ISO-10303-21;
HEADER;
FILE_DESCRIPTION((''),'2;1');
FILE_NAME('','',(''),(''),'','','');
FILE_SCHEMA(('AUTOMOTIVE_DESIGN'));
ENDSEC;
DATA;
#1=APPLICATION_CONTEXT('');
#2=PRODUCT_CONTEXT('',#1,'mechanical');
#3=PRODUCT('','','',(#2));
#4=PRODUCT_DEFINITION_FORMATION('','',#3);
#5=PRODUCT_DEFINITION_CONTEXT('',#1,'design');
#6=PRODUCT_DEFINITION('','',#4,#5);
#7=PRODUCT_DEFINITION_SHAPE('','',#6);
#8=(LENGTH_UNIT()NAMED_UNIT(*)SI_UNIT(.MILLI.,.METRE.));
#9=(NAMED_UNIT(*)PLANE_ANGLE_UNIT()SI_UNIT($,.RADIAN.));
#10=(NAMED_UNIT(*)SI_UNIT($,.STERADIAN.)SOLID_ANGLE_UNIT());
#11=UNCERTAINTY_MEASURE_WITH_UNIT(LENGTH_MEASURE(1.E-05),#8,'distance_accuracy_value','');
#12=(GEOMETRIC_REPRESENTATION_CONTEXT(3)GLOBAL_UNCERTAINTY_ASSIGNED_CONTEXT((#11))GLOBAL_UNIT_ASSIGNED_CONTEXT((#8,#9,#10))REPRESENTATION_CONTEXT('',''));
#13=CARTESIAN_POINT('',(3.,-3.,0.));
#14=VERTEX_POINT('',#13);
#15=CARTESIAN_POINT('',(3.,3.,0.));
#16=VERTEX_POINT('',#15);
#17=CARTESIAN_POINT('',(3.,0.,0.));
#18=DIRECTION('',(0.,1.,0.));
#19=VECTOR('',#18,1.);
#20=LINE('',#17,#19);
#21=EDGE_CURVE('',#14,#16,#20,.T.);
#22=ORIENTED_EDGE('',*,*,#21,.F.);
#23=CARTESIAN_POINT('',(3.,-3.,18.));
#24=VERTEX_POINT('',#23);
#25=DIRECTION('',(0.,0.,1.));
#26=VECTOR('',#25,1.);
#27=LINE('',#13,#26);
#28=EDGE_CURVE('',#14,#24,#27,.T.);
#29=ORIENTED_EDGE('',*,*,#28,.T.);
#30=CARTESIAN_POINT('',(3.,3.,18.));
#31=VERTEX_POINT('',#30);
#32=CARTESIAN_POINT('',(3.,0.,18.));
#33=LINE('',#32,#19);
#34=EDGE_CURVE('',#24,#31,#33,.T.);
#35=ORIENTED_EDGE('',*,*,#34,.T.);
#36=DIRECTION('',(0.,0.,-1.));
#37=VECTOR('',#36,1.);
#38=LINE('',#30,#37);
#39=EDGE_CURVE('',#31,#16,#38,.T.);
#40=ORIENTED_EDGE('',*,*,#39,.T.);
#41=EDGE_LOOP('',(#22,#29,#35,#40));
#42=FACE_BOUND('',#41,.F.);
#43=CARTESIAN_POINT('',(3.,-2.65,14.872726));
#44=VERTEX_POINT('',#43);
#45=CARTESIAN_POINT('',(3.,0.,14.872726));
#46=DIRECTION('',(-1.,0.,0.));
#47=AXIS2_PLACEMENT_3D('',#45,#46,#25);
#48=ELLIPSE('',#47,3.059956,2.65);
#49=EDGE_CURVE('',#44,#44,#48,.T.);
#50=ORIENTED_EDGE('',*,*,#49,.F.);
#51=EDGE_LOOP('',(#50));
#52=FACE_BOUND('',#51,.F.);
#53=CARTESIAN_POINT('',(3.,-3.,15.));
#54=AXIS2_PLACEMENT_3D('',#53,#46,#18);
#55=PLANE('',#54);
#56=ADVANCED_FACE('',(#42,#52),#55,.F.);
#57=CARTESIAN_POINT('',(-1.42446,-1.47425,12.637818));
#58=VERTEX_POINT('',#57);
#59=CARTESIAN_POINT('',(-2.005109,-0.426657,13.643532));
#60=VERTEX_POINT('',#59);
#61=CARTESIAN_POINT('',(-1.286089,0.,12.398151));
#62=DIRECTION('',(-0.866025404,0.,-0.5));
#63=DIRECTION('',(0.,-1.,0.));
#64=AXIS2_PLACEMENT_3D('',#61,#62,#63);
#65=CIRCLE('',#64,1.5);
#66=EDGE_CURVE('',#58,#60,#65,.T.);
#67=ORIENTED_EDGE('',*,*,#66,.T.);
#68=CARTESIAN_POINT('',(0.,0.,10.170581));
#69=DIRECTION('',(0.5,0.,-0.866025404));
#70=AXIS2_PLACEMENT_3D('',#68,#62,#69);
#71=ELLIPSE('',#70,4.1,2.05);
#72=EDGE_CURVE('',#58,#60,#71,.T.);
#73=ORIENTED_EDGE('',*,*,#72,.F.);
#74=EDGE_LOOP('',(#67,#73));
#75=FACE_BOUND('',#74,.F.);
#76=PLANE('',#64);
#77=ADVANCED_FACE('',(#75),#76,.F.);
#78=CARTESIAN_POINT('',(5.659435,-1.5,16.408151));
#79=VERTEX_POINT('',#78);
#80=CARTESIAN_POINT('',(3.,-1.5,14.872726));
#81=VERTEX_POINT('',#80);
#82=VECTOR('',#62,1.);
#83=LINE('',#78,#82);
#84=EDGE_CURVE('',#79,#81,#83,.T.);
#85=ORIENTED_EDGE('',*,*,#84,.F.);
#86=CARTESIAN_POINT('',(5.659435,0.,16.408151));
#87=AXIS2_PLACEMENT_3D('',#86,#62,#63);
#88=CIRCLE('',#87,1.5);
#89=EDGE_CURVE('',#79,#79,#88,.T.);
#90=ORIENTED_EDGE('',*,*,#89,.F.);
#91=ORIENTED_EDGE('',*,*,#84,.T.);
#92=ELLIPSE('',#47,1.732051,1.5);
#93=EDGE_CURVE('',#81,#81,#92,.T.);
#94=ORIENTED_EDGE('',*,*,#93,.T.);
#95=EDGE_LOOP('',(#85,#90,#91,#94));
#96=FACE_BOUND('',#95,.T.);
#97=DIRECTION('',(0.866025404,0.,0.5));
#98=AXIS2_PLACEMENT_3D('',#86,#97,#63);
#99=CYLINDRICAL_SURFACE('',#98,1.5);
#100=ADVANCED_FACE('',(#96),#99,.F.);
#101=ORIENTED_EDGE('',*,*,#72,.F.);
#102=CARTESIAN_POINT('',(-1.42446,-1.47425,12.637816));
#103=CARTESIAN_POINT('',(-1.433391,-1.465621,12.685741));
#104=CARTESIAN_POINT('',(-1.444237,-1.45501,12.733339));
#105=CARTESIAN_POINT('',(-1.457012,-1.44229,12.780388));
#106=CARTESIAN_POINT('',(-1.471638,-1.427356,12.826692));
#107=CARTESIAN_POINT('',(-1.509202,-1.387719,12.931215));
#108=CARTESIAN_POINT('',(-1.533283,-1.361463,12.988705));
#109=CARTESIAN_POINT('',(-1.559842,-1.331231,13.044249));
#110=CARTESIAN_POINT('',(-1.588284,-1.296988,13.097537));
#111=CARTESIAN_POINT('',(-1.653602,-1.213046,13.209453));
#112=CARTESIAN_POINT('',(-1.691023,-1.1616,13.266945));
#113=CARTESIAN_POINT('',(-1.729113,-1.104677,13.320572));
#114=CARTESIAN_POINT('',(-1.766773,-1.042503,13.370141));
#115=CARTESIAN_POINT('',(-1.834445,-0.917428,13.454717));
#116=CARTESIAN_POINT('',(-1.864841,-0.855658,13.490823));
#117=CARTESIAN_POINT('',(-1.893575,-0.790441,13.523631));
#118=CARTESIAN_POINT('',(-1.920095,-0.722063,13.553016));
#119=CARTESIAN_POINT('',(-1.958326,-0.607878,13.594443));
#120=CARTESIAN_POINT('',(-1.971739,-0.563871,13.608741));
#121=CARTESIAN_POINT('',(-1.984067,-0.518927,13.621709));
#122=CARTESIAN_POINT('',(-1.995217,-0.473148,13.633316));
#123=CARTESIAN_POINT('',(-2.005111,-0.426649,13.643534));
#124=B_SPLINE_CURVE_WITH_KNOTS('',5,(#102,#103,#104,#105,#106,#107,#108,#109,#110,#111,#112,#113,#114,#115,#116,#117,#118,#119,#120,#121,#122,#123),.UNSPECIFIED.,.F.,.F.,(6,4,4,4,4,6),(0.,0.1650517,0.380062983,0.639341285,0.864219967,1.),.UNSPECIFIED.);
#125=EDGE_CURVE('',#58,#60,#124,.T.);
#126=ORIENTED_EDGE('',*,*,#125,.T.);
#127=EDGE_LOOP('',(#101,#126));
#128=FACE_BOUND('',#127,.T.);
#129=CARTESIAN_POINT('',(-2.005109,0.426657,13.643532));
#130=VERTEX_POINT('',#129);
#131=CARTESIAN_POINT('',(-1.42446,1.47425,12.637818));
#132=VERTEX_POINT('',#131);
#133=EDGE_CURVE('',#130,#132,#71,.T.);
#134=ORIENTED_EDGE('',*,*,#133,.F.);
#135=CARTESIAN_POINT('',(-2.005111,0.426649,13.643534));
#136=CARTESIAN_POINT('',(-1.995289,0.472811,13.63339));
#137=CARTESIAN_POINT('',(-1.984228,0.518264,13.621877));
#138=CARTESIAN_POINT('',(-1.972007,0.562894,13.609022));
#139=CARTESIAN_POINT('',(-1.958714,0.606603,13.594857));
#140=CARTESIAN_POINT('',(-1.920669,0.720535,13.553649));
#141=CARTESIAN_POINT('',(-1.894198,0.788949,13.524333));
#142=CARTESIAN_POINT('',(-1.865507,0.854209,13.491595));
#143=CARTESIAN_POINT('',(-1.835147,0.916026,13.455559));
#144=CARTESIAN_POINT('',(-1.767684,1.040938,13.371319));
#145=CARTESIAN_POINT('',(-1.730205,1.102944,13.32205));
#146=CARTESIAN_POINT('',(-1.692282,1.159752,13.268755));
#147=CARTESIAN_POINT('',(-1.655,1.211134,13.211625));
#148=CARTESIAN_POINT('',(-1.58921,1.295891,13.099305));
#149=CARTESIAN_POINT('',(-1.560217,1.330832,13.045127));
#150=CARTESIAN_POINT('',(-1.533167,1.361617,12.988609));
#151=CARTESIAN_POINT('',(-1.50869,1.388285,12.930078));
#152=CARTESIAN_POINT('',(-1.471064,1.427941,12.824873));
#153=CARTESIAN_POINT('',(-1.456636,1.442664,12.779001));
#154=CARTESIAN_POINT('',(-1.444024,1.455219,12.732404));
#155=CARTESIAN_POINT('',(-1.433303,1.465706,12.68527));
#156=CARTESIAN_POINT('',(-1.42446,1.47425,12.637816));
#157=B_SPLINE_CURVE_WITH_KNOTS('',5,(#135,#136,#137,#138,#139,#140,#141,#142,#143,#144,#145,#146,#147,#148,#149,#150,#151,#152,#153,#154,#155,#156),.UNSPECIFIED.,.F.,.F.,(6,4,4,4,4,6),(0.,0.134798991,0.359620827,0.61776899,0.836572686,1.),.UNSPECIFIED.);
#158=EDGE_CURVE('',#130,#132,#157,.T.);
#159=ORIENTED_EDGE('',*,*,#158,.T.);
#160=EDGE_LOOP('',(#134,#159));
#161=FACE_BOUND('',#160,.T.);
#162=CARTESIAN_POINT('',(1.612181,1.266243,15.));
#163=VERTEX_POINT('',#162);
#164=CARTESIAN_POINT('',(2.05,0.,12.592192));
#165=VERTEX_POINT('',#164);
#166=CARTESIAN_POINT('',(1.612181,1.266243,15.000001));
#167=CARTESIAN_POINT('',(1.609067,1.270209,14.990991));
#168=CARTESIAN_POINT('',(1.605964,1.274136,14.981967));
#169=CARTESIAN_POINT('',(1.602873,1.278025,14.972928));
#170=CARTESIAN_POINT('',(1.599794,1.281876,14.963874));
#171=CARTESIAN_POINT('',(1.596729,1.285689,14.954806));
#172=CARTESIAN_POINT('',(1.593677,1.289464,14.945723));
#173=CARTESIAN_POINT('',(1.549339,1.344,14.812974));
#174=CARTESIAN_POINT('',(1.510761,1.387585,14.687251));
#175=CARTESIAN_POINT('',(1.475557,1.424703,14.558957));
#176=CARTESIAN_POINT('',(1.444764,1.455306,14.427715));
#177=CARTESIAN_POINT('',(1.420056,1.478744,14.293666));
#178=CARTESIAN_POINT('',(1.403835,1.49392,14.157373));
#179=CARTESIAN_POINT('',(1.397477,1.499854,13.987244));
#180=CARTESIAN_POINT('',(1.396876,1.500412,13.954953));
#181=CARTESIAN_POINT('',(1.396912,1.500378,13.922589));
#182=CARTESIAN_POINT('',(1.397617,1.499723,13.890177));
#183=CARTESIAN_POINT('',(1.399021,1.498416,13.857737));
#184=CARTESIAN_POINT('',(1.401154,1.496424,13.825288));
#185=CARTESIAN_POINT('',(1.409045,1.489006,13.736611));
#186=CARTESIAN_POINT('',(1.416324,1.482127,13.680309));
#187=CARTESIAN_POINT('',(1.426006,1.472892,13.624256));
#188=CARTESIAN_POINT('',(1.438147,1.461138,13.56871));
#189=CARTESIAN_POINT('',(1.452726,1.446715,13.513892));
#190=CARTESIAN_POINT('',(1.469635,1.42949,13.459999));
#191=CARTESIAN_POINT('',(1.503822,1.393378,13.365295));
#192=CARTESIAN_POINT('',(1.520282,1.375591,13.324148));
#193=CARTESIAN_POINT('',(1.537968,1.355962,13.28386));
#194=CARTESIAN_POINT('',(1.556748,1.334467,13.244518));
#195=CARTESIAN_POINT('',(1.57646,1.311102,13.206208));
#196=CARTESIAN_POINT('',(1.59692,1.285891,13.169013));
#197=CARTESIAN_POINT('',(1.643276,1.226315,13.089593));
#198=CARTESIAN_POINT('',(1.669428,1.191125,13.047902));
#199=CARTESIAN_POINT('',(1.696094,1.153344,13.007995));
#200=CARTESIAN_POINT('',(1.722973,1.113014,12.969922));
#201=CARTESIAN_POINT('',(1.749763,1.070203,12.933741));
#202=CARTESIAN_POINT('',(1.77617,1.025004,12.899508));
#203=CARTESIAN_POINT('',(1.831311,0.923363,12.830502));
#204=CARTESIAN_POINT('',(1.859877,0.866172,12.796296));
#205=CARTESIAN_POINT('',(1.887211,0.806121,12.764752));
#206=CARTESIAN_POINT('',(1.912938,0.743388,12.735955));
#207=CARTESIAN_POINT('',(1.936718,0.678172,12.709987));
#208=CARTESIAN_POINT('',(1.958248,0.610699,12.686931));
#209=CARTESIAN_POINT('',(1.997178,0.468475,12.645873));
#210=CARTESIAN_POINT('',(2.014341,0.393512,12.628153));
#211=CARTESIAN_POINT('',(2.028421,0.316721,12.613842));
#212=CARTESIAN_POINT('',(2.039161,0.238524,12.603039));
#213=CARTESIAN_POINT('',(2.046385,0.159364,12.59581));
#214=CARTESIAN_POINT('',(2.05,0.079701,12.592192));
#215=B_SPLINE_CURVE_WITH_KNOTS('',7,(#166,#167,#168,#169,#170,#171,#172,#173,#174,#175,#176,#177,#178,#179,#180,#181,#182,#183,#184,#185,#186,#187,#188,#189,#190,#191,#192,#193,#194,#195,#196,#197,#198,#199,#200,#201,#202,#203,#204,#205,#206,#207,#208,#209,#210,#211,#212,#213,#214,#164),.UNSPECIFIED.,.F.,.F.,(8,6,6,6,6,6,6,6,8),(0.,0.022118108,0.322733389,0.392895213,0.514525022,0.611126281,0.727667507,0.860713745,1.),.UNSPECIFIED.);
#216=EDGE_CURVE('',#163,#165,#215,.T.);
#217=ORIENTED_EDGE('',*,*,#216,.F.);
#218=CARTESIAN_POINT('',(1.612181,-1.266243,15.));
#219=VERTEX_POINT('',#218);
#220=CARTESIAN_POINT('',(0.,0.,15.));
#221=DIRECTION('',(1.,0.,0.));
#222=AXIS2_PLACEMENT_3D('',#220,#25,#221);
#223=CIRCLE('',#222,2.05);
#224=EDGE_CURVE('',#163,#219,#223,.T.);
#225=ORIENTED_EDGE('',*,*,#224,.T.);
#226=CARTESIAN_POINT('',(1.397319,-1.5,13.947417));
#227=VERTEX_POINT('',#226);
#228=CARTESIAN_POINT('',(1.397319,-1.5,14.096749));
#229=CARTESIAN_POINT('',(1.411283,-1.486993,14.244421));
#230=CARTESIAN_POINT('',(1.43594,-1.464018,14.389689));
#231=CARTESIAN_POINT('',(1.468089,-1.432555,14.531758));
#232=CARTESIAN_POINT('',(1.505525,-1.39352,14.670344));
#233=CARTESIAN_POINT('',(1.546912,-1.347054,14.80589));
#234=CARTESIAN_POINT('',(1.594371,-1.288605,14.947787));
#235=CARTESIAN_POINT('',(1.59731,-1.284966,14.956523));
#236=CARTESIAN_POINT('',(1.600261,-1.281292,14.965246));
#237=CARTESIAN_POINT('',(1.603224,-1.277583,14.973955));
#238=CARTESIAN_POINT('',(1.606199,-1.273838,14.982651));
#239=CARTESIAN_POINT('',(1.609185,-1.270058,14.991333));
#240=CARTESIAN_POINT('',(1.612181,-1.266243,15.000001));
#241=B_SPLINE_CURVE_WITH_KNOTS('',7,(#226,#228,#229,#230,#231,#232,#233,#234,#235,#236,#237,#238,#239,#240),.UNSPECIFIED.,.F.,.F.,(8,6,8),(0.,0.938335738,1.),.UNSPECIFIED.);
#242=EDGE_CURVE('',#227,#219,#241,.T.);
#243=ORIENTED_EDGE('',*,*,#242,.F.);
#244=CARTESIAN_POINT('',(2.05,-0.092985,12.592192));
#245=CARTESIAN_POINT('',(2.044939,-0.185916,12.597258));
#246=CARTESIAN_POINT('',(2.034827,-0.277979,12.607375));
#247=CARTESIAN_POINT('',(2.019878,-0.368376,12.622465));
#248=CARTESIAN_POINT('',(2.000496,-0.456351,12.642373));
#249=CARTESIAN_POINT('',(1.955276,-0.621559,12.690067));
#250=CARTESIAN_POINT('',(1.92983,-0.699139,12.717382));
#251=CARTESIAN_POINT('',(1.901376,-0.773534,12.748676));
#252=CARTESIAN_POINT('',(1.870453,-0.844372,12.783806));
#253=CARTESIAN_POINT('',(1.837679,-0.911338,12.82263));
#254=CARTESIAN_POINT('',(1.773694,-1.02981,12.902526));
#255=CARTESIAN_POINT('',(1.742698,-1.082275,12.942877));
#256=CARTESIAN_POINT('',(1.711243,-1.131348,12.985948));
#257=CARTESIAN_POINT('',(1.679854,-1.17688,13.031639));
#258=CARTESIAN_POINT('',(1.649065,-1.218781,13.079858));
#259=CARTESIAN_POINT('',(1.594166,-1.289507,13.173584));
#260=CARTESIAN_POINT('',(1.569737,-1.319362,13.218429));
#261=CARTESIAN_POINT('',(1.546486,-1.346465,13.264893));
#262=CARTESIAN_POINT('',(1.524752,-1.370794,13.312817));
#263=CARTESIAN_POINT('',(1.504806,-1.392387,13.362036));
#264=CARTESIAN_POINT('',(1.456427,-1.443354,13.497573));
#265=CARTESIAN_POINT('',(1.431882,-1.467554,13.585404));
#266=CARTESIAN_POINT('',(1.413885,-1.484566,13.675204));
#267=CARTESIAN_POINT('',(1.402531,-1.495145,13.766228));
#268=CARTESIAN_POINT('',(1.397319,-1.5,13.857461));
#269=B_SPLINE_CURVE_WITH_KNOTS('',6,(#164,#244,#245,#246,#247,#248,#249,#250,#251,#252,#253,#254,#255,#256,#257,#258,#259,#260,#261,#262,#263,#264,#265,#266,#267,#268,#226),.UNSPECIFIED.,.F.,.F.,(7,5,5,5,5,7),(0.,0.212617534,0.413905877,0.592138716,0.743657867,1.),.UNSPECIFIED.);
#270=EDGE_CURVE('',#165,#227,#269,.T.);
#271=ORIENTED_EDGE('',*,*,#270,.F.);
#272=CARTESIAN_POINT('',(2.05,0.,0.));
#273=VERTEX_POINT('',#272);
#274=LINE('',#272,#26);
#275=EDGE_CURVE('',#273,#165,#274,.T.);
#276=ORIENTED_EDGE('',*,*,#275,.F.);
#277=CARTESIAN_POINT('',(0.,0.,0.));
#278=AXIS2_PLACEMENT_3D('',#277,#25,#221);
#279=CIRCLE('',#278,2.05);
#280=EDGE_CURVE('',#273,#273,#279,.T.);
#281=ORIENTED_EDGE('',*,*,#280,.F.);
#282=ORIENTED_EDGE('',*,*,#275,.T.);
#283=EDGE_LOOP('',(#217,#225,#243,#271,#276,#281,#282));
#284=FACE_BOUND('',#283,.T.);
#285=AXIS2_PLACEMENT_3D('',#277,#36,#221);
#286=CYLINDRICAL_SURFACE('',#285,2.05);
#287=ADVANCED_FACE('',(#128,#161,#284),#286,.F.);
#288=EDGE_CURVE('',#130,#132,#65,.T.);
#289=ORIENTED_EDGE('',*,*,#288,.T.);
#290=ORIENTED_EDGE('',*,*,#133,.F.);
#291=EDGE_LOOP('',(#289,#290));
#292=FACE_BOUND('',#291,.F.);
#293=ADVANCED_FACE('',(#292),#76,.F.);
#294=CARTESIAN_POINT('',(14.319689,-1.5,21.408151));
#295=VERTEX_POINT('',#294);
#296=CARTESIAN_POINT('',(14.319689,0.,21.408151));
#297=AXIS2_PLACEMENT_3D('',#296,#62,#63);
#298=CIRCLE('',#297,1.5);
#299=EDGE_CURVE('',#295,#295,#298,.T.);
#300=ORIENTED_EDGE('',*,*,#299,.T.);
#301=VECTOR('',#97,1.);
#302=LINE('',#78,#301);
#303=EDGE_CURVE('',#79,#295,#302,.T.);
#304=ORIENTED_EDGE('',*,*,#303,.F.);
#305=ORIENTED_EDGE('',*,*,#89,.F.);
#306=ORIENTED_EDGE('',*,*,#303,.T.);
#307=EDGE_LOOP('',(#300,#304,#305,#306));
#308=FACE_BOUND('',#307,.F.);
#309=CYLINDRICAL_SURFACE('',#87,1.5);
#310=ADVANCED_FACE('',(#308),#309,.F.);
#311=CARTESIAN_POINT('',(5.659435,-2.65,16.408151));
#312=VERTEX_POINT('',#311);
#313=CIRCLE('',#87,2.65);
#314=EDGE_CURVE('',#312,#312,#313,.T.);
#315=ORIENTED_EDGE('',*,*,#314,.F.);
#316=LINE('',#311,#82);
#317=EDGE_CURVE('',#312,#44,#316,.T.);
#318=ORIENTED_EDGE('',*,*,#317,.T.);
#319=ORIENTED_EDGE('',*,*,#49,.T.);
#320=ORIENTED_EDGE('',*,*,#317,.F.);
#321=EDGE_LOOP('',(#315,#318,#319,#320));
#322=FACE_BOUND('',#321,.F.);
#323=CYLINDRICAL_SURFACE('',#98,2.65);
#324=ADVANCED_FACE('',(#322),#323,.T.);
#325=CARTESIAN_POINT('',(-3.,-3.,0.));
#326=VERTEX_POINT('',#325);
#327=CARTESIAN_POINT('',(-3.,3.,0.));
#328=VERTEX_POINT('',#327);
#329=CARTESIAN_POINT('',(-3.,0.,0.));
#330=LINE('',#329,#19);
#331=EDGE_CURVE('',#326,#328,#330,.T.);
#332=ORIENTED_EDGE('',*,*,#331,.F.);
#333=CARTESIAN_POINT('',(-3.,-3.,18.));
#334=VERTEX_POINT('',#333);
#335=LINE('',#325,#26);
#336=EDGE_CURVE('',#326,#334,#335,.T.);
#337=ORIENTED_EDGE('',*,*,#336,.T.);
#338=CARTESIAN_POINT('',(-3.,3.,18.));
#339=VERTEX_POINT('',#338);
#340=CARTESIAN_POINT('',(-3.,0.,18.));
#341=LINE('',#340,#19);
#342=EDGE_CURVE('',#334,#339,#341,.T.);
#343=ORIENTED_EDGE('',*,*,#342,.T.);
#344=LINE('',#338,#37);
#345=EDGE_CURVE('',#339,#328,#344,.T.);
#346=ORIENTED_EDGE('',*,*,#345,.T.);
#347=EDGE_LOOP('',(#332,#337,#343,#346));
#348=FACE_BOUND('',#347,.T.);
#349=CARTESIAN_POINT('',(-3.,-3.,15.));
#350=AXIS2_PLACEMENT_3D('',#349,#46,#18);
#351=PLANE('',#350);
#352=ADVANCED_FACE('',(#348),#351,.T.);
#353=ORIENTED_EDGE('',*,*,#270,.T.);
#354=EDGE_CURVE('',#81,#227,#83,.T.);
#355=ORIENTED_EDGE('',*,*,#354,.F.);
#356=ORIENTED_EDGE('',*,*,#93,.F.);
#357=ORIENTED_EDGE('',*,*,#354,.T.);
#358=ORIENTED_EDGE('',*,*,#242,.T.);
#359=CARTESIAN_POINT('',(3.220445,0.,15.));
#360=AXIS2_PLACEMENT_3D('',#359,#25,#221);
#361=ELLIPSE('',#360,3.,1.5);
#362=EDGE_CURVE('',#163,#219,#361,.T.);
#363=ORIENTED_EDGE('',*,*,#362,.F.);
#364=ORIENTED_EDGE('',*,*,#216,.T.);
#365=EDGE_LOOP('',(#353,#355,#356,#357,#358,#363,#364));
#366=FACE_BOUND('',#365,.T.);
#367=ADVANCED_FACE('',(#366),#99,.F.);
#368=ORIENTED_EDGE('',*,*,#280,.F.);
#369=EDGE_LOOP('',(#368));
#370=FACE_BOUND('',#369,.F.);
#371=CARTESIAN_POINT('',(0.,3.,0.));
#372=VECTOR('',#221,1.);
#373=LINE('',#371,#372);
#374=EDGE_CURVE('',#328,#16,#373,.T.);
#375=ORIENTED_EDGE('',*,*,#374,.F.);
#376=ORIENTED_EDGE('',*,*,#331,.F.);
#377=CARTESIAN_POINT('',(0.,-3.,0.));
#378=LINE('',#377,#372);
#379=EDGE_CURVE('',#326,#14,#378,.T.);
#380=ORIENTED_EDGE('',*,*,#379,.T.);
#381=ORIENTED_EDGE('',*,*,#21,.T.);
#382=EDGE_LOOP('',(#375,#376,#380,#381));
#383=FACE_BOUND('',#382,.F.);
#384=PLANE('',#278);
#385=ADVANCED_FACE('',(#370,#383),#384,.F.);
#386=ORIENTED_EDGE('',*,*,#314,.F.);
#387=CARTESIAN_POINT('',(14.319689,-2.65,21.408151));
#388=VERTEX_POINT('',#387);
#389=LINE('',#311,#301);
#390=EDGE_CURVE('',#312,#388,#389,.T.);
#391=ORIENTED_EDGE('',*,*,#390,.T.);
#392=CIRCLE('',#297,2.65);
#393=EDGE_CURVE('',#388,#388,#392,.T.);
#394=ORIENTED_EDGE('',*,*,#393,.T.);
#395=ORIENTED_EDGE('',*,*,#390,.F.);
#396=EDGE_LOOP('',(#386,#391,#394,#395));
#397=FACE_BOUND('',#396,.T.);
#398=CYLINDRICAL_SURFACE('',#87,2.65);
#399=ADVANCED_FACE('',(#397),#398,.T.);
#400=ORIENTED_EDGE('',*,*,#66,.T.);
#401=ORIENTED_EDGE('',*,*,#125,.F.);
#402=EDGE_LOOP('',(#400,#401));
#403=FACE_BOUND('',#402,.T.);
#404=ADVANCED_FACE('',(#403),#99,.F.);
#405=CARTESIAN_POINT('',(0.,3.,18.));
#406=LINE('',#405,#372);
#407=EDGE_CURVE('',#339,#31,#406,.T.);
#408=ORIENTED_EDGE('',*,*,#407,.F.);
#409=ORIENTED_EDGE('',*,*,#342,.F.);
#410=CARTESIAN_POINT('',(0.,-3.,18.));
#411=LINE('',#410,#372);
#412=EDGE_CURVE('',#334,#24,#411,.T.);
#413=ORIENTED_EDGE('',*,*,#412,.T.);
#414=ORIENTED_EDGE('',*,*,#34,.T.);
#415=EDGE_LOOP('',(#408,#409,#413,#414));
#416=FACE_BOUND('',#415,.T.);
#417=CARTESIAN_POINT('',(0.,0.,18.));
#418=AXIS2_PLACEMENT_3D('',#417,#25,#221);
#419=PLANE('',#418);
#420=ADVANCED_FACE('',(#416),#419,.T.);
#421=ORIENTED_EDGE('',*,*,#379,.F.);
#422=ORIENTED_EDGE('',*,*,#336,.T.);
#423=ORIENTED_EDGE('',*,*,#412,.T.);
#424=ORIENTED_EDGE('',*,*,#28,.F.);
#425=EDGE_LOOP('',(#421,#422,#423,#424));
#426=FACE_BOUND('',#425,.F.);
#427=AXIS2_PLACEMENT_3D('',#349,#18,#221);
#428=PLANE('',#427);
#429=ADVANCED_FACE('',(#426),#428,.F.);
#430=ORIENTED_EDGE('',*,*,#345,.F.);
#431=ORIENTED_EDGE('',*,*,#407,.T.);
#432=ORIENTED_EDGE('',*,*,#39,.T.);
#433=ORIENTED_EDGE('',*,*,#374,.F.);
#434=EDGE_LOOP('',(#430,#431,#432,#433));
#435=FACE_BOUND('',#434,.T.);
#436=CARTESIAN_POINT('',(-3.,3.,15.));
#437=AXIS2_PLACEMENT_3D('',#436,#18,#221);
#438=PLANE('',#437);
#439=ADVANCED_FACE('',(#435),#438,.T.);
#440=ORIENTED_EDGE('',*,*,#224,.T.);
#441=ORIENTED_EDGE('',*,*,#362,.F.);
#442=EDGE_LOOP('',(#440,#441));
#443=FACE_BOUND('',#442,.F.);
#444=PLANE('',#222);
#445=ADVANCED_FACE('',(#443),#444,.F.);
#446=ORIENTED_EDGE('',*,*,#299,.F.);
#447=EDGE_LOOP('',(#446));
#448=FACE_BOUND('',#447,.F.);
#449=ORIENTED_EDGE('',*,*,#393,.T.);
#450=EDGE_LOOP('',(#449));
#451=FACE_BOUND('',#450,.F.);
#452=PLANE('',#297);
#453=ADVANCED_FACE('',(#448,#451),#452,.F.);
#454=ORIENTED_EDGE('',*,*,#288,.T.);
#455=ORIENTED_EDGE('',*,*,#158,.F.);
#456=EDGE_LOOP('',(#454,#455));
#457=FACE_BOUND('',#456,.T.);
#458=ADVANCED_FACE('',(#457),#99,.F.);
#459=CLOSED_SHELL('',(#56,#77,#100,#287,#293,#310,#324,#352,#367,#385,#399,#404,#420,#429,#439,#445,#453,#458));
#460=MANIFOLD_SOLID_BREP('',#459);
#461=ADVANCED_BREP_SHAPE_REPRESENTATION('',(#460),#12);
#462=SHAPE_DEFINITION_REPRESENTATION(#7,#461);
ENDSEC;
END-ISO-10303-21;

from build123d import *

# Parameters (mm, degrees)
F0_W      = 6
F0_H      = 6
F0_R      = 2.05
F1_DEPTH  = 15
F3_W      = 6
F3_H      = 6
F4_DEPTH  = 3
F8_R      = 2.65
F8_R_2    = 1.5
F10_DEPTH = 10
F11_DEPTH = 8.02


with BuildPart() as f1:
    # F0 (on Top) → F1 (new body)
    with BuildSketch(Plane.XY):
        Rectangle(F0_W, F0_H)
        Circle(F0_R, mode=Mode.SUBTRACT)
    extrude(amount=F1_DEPTH)

    # F3 (on offset) → F4 (join)
    with BuildSketch(Plane.XY.offset(15)):
        Rectangle(F3_W, F3_H)
    extrude(amount=F4_DEPTH)

    # F8 (on offset) → F9 (join, up to the next surface of F1)
    with BuildSketch(Plane(origin=(11.349514303, 0, 6.552645138), x_dir=(0, -1, 0), z_dir=(-0.8660254038, 0, -0.5))):
        with Locations((0, 11.3801583648)):
            Circle(F8_R)
        with Locations((0, 11.3801583648)):
            Circle(F8_R_2, mode=Mode.SUBTRACT)
    extrude(until=Until.NEXT)

    # F8 (on offset) → F10 (join)
    with BuildSketch(Plane(origin=(11.349514303, 0, 6.552645138), x_dir=(0, -1, 0), z_dir=(-0.8660254038, 0, -0.5))):
        with Locations((0, 11.3801583648)):
            Circle(F8_R)
        with Locations((0, 11.3801583648)):
            Circle(F8_R_2, mode=Mode.SUBTRACT)
    extrude(amount=-F10_DEPTH)

    # F8 (on offset) → F11 (cut)
    with BuildSketch(Plane(origin=(11.349514303, 0, 6.552645138), x_dir=(0, -1, 0), z_dir=(-0.8660254038, 0, -0.5))):
        with Locations((0, 11.3801583648)):
            Circle(F8_R_2)
    extrude(amount=F11_DEPTH, mode=Mode.SUBTRACT)


solid = f1.part
